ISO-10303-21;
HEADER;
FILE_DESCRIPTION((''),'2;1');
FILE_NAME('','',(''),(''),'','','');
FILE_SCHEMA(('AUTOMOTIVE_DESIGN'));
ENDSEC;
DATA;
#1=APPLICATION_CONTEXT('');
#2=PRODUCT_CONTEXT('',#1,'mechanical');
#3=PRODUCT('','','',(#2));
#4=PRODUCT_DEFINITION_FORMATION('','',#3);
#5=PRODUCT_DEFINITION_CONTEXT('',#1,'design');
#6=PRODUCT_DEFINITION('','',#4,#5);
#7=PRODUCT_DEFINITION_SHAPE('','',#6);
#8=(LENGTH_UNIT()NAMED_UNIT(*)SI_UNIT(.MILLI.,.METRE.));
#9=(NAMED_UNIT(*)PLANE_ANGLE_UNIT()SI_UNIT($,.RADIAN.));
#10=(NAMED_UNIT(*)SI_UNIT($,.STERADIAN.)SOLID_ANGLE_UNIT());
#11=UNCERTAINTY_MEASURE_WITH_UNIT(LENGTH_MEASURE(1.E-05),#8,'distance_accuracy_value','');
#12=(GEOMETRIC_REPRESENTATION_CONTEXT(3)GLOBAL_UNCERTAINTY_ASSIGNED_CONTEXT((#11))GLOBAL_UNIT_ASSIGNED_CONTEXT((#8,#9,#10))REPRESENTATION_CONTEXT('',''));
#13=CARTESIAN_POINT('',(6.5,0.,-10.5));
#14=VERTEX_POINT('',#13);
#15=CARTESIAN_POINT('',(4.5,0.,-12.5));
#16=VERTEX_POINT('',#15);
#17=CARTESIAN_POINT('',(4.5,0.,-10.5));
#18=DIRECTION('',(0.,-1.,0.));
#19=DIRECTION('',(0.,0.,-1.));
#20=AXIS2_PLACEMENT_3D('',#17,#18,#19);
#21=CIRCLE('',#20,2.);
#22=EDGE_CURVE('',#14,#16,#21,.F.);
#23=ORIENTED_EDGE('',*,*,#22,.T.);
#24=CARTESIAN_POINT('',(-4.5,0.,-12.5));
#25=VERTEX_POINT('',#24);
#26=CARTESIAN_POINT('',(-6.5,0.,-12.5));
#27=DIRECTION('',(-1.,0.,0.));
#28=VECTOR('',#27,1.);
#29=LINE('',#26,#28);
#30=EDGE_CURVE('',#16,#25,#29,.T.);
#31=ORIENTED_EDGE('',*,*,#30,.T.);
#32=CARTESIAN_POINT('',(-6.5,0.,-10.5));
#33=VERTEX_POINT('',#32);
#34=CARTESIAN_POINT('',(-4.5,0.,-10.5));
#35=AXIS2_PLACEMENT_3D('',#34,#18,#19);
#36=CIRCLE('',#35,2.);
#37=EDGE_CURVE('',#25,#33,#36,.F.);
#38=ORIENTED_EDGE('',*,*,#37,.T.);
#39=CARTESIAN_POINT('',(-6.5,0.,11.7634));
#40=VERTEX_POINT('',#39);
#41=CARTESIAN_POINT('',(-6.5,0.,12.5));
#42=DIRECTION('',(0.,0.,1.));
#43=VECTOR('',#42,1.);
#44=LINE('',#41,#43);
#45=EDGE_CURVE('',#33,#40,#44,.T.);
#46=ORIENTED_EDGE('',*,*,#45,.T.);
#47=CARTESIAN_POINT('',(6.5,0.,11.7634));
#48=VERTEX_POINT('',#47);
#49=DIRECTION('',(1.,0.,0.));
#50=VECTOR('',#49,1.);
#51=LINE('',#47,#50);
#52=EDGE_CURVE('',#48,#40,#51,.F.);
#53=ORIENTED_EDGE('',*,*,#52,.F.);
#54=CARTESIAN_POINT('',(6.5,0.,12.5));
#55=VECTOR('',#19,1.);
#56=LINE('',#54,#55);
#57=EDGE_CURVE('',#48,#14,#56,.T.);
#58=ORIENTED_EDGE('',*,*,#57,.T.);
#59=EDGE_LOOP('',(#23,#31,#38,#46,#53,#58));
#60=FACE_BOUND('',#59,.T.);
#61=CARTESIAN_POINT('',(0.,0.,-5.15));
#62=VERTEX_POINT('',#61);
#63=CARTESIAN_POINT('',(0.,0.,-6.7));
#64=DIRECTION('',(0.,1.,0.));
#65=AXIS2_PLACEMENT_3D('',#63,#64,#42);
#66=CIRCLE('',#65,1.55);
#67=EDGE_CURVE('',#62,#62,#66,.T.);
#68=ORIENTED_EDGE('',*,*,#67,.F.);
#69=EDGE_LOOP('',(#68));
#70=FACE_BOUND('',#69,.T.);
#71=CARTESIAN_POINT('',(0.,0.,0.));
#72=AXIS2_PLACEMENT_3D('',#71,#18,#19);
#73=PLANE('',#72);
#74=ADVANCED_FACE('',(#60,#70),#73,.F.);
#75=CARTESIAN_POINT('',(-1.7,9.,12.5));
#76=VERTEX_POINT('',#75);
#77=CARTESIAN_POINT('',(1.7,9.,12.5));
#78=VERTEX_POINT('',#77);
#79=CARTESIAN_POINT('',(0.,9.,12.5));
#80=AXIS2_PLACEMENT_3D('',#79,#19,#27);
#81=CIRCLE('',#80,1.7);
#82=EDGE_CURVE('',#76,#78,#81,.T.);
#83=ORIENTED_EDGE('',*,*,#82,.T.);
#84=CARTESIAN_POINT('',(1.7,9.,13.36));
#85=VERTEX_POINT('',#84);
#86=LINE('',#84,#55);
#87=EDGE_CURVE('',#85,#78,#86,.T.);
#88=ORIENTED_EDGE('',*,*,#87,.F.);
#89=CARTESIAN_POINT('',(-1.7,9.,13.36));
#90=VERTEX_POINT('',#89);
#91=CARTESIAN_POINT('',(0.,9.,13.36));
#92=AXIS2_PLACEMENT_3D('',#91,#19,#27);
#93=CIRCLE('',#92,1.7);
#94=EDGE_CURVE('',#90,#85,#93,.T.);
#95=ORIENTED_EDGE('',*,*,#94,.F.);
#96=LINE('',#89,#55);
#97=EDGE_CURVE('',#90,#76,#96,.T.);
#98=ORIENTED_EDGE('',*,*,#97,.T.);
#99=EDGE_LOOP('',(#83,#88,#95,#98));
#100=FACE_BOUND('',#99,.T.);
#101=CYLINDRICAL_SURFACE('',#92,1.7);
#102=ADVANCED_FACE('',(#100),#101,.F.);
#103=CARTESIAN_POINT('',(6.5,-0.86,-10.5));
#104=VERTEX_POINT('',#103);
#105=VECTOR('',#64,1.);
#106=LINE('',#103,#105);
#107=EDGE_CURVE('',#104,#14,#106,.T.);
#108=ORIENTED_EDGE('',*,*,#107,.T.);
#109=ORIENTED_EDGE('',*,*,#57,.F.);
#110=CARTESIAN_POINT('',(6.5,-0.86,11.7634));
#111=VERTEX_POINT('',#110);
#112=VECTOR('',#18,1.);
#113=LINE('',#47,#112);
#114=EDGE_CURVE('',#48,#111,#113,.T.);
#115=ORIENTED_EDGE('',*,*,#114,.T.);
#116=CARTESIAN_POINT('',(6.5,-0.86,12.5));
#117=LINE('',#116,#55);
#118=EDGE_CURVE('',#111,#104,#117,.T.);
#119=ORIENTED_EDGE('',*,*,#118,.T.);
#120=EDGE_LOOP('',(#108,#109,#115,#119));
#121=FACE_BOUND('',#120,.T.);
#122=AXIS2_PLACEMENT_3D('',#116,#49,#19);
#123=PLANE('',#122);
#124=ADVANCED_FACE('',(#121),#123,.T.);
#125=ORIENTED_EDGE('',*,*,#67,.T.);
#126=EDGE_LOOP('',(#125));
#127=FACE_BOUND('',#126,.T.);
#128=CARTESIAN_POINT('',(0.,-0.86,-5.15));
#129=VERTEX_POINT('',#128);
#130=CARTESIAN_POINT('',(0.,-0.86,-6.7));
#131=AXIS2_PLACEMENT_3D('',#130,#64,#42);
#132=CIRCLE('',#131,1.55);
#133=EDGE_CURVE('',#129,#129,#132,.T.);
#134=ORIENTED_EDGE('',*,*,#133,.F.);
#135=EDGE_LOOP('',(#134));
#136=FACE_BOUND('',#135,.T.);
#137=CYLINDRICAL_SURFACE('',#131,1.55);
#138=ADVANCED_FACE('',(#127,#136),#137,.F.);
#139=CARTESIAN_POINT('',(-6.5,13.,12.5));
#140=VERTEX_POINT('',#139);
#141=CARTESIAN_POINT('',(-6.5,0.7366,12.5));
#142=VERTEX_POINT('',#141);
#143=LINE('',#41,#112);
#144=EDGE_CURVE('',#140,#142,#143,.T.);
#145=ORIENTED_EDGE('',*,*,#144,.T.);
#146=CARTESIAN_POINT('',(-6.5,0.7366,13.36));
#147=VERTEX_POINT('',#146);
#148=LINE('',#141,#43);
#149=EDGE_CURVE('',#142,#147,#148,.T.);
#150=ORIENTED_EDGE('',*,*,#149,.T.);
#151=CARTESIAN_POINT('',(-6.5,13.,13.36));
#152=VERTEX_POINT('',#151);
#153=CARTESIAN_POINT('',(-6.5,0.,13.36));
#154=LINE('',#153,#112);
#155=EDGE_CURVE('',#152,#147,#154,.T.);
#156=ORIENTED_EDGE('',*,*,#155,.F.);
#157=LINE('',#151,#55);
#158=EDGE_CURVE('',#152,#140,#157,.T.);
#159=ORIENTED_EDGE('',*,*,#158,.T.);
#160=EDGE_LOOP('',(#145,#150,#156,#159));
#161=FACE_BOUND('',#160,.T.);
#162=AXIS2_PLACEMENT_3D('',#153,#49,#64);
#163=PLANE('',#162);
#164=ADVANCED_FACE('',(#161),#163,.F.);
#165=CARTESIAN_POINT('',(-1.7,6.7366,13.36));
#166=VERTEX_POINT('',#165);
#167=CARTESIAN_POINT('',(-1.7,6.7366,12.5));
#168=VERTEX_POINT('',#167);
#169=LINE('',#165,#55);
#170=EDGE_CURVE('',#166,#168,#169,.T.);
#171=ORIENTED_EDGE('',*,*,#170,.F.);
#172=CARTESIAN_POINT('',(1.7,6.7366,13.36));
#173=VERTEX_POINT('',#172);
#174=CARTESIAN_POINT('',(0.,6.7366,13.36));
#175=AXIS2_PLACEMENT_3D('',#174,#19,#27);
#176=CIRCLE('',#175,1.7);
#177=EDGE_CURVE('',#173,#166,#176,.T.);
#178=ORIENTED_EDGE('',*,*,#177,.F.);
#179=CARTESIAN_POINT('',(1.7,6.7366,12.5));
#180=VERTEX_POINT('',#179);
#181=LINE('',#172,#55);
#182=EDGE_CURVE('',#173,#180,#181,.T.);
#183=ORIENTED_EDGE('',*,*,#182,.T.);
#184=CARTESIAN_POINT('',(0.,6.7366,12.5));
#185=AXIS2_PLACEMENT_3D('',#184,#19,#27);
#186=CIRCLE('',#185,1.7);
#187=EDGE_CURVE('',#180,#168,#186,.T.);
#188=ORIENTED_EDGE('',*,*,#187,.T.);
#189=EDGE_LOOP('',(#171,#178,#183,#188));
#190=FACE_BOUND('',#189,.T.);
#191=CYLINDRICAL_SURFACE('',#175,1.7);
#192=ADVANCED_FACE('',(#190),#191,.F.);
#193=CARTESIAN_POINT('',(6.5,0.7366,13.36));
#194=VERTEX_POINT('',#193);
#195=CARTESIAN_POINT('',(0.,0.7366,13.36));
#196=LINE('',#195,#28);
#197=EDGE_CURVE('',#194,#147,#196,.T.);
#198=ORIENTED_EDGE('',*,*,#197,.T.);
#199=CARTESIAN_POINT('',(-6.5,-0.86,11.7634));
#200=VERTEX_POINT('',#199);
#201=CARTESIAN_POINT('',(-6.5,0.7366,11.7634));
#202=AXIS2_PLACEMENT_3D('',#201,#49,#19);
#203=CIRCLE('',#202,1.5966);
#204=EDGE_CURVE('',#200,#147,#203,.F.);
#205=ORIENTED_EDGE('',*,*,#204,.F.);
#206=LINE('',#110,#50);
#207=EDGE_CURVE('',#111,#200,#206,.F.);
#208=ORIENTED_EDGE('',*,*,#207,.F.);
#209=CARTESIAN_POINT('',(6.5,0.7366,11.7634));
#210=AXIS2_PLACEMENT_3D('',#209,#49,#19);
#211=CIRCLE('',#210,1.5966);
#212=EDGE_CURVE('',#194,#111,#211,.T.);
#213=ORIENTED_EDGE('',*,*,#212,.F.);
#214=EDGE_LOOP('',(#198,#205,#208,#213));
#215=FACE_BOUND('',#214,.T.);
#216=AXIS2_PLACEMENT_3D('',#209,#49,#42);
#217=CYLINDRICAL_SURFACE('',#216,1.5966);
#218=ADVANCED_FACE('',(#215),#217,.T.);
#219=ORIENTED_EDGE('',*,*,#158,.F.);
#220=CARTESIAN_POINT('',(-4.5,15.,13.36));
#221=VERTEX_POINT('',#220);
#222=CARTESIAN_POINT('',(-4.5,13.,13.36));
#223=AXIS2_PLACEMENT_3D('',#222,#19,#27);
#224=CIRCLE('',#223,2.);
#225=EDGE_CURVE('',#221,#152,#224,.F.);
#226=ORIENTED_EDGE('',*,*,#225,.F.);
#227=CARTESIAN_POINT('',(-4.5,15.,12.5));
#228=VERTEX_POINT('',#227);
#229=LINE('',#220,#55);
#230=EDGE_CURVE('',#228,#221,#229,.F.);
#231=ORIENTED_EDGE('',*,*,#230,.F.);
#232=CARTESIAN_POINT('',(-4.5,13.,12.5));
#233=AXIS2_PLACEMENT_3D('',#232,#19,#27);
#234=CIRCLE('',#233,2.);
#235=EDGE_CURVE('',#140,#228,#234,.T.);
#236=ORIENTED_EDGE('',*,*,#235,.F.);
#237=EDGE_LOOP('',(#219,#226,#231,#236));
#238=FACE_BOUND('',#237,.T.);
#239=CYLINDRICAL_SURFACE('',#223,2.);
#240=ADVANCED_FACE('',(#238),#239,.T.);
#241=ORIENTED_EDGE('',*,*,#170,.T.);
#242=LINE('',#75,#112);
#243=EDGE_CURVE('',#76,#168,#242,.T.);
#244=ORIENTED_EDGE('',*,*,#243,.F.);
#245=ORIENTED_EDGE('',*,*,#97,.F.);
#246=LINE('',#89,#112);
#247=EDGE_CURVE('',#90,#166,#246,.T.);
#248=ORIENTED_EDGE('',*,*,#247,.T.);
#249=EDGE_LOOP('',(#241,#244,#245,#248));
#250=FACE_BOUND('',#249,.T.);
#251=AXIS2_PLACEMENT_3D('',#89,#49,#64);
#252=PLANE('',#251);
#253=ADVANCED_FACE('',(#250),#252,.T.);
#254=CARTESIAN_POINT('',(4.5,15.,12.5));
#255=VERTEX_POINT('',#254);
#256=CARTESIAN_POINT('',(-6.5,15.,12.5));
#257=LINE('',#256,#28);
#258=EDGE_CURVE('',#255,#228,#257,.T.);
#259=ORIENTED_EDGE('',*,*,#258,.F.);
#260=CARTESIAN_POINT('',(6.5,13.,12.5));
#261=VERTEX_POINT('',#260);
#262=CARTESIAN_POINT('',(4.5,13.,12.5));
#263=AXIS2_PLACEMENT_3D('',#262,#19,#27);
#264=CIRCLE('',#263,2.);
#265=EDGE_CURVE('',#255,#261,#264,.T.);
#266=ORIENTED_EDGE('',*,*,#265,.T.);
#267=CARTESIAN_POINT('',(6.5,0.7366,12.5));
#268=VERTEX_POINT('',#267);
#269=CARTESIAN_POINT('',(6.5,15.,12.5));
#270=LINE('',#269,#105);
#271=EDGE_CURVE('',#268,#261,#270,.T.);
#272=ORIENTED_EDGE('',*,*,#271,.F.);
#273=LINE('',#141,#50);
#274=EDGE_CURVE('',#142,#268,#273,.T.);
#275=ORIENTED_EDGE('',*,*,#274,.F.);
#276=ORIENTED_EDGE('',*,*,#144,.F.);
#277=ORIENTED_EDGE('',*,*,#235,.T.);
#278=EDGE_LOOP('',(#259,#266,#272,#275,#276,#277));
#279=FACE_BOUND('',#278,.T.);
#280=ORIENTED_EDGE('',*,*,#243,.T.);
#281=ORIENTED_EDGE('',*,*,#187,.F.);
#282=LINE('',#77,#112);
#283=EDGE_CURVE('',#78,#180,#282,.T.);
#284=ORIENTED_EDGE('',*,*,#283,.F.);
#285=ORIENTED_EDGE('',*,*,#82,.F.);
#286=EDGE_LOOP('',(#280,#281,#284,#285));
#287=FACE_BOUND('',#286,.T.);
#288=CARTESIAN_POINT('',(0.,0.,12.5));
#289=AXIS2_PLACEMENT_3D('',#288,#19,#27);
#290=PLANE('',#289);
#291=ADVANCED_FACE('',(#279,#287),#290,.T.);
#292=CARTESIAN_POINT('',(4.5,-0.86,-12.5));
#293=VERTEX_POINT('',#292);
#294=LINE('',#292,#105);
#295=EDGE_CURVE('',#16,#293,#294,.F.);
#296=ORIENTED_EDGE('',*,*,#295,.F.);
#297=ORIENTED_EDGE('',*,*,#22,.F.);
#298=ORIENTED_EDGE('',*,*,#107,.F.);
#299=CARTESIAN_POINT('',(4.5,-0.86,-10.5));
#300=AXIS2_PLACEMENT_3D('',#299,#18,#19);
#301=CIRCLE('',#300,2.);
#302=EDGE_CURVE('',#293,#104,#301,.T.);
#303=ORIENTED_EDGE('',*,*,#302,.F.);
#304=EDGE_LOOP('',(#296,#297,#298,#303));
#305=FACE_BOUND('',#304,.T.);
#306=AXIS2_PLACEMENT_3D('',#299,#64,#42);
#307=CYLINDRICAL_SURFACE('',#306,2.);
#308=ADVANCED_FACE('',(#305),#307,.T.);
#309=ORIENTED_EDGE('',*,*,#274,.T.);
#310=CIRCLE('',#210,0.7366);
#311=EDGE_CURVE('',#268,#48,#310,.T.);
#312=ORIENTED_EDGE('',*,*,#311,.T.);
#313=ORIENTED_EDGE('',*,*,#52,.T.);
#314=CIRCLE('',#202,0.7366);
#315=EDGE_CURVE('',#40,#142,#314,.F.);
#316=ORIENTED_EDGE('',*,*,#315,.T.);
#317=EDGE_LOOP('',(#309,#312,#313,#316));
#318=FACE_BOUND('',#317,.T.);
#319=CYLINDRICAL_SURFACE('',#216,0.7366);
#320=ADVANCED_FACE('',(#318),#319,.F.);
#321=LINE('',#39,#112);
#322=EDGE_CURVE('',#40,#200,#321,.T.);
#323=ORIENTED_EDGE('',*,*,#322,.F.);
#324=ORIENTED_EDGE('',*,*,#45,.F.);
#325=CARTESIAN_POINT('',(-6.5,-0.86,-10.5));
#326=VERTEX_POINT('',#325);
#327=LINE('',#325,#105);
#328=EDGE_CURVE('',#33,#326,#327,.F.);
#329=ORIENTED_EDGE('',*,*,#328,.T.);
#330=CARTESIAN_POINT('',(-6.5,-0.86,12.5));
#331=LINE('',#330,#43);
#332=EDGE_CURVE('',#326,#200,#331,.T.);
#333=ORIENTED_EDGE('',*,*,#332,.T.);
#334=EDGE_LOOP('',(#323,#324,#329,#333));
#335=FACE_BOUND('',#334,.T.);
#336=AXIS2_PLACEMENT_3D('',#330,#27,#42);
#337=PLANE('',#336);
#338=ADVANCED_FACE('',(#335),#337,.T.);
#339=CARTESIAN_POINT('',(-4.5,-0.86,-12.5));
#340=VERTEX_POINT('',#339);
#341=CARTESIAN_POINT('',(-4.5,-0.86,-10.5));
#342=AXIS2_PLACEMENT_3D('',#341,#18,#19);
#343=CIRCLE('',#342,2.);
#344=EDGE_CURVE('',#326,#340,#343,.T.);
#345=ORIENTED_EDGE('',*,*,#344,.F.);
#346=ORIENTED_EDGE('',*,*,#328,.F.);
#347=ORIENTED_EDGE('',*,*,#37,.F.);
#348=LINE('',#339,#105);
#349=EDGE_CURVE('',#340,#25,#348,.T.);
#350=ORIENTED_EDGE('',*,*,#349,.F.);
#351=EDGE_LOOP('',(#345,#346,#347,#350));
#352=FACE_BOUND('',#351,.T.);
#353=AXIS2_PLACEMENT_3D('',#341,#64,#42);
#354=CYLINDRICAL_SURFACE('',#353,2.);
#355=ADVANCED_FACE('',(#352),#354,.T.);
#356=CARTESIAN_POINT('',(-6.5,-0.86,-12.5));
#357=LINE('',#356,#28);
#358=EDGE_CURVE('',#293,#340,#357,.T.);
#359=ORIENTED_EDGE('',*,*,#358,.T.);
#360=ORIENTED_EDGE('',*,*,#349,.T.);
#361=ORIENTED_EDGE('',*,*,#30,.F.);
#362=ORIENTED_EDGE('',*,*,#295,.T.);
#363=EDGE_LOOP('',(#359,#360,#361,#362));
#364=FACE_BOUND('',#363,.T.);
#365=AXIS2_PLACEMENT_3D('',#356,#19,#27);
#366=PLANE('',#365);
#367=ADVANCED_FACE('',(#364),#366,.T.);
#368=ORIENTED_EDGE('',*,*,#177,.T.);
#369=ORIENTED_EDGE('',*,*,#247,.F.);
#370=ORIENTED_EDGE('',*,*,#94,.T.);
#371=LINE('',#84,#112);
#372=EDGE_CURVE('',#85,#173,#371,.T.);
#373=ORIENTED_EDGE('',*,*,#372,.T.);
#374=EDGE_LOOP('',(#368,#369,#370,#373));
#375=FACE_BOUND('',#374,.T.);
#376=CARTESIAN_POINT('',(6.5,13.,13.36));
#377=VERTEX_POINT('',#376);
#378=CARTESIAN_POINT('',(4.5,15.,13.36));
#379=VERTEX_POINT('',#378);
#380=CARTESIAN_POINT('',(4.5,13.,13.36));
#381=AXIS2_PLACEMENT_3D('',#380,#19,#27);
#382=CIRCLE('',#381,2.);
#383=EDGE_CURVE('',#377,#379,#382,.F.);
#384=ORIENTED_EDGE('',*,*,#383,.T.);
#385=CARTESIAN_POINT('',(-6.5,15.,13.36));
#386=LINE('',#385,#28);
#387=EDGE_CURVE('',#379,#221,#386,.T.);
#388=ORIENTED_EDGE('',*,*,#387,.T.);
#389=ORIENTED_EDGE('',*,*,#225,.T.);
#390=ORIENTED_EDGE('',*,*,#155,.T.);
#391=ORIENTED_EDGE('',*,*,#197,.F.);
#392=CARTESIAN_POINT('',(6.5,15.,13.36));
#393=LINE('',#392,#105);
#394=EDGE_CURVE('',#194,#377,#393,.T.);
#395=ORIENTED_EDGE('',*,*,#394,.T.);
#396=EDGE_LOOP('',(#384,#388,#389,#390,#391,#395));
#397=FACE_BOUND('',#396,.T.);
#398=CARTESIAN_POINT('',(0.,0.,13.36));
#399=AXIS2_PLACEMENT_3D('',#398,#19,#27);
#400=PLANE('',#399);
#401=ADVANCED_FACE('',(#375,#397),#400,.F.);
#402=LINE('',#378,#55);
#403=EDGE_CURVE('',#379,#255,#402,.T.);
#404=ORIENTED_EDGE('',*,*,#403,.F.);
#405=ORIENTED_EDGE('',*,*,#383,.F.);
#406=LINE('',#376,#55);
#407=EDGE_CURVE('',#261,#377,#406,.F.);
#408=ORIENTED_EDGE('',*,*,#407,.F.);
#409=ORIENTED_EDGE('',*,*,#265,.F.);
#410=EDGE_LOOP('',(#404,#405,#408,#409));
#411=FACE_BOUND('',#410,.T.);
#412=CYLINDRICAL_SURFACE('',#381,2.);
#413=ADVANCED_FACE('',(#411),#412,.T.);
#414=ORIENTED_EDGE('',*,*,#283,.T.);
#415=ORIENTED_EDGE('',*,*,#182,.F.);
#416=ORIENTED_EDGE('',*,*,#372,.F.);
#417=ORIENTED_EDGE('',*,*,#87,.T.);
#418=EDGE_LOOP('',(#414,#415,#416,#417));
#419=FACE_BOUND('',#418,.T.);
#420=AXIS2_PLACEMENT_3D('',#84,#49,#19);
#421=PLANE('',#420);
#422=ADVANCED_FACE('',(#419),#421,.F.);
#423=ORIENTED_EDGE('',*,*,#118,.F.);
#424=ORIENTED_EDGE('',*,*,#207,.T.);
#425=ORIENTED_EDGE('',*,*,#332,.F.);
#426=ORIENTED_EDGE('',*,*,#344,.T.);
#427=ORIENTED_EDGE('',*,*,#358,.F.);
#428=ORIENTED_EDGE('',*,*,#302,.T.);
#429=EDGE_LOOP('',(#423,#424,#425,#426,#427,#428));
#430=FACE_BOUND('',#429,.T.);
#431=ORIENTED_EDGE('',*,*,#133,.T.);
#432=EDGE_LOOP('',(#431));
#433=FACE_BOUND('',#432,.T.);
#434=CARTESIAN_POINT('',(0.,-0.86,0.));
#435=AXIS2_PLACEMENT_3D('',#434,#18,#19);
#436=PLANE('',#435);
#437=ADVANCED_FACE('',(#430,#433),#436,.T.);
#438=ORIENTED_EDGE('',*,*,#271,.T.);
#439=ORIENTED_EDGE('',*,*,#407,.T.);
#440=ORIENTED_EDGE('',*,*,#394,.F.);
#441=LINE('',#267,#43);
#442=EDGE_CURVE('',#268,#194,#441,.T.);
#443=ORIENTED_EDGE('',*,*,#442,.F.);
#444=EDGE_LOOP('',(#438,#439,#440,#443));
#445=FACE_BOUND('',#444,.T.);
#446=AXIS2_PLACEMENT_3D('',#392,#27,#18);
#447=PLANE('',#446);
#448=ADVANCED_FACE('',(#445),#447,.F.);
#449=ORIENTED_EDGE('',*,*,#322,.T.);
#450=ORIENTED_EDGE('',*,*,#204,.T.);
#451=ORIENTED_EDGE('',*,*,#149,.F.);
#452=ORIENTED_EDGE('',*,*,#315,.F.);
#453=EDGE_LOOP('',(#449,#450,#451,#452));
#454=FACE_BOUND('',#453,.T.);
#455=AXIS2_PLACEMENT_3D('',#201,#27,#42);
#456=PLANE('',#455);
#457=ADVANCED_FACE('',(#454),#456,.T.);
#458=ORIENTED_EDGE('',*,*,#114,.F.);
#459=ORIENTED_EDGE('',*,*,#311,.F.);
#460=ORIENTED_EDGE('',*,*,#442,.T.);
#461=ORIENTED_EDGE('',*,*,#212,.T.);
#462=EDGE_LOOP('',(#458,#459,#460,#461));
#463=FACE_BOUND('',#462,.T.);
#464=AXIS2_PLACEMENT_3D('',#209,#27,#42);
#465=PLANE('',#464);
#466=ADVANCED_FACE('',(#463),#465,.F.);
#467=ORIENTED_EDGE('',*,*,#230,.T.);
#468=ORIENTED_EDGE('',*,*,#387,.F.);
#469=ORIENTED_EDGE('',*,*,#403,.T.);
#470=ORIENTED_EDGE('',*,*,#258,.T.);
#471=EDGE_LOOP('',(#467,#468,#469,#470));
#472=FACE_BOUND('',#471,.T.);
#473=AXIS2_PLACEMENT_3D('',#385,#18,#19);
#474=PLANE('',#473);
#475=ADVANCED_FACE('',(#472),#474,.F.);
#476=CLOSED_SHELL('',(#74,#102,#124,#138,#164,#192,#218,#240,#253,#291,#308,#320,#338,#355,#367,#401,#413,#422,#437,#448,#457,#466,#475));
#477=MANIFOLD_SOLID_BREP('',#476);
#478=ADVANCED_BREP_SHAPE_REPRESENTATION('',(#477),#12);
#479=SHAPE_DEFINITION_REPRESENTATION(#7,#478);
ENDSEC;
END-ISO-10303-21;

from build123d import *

# Parameters (mm, degrees)
SKETCH1_W                    = 13
SKETCH1_H                    = 25
BASE_FLANGE1_DEPTH           = 0.86
EDGE_FLANGE1_STRIP_W         = 4.9132
EDGE_FLANGE1_STRIP_H         = 0.86
EDGE_FLANGE1_STRIP_CUT_DEPTH = 13
EDGE_FLANGE1_DEPTH           = 13
FILLET1_R                    = 2
SKETCH10_R                   = 1.55
CUT_EXTRUDE1_DEPTH           = 22.112546033
CUT_EXTRUDE2_DEPTH           = 30.870554062


# Sheet-metal steps are written as plain solids
with BuildPart() as part:
    # Sketch1 → Base-Flange1 (new body)
    with BuildSketch(Plane(origin=(0, 0, 0), x_dir=(1, 0, 0), z_dir=(0, 1, 0))):
        Rectangle(SKETCH1_W, SKETCH1_H)
    extrude(amount=-BASE_FLANGE1_DEPTH)

    # Edge-Flange1 strip (across the edge) → Edge-Flange1 strip cut (cut)
    with BuildSketch(Plane(origin=(-6.5, 0, 12.5), x_dir=(0, 0, -1), z_dir=(1, 0, 0))):
        with Locations((-1.72, -0.43)):
            Rectangle(EDGE_FLANGE1_STRIP_W, EDGE_FLANGE1_STRIP_H)
    extrude(amount=EDGE_FLANGE1_STRIP_CUT_DEPTH, mode=Mode.SUBTRACT)

    # Edge-Flange1 section (across the edge) → Edge-Flange1 (add)
    with BuildSketch(Plane(origin=(-6.5, 0, 12.5), x_dir=(0, 0, -1), z_dir=(1, 0, 0))):
        with BuildLine():
            Line((-0.86, 0.7366), (-0.86, 15))
            Line((-0.86, 15), (0, 15))
            Line((0, 15), (0, 0.7366))
            ThreePointArc((0, 0.7366), (0.215745145, 0.215745145), (0.7366, 0))
            Line((0.7366, 0), (0.7366, -0.86))
            ThreePointArc((0.7366, -0.86), (-0.392366687, -0.392366687), (-0.86, 0.7366))
        make_face()
    extrude(amount=EDGE_FLANGE1_DEPTH)

    # Fillet1
    fillet1_edges = [part.edges().sort_by_distance(p)[0] for p in [
        (-6.5, 15, 12.93),
        (6.5, 15, 12.93),
        (-6.5, -0.43, -12.5),
        (6.5, -0.43, -12.5),
    ]]
    fillet(fillet1_edges, radius=FILLET1_R)

    # Sketch10 → Cut-Extrude1 (cut, through all)
    with BuildSketch(Plane(origin=(0, 0, 0), x_dir=(1, 0, 0), z_dir=(0, 1, 0))):
        with Locations(Location((0, 6.7, 0), (0, 0, 270))):
            Circle(SKETCH10_R)
    extrude(amount=-CUT_EXTRUDE1_DEPTH, mode=Mode.SUBTRACT)

    # Sketch11 → Cut-Extrude2 (cut, through all)
    with BuildSketch(Plane(origin=(0, 0, 12.5), x_dir=(-1, 0, 0), z_dir=(0, 0, -1))):
        with BuildLine():
            Line((1.7, 9), (1.7, 6.7366))
            ThreePointArc((1.7, 6.7366), (0, 5.0366), (-1.7, 6.7366))
            Line((-1.7, 6.7366), (-1.7, 9))
            ThreePointArc((-1.7, 9), (0, 10.7), (1.7, 9))
        make_face()
    extrude(amount=-CUT_EXTRUDE2_DEPTH, mode=Mode.SUBTRACT)


solid = part.part
